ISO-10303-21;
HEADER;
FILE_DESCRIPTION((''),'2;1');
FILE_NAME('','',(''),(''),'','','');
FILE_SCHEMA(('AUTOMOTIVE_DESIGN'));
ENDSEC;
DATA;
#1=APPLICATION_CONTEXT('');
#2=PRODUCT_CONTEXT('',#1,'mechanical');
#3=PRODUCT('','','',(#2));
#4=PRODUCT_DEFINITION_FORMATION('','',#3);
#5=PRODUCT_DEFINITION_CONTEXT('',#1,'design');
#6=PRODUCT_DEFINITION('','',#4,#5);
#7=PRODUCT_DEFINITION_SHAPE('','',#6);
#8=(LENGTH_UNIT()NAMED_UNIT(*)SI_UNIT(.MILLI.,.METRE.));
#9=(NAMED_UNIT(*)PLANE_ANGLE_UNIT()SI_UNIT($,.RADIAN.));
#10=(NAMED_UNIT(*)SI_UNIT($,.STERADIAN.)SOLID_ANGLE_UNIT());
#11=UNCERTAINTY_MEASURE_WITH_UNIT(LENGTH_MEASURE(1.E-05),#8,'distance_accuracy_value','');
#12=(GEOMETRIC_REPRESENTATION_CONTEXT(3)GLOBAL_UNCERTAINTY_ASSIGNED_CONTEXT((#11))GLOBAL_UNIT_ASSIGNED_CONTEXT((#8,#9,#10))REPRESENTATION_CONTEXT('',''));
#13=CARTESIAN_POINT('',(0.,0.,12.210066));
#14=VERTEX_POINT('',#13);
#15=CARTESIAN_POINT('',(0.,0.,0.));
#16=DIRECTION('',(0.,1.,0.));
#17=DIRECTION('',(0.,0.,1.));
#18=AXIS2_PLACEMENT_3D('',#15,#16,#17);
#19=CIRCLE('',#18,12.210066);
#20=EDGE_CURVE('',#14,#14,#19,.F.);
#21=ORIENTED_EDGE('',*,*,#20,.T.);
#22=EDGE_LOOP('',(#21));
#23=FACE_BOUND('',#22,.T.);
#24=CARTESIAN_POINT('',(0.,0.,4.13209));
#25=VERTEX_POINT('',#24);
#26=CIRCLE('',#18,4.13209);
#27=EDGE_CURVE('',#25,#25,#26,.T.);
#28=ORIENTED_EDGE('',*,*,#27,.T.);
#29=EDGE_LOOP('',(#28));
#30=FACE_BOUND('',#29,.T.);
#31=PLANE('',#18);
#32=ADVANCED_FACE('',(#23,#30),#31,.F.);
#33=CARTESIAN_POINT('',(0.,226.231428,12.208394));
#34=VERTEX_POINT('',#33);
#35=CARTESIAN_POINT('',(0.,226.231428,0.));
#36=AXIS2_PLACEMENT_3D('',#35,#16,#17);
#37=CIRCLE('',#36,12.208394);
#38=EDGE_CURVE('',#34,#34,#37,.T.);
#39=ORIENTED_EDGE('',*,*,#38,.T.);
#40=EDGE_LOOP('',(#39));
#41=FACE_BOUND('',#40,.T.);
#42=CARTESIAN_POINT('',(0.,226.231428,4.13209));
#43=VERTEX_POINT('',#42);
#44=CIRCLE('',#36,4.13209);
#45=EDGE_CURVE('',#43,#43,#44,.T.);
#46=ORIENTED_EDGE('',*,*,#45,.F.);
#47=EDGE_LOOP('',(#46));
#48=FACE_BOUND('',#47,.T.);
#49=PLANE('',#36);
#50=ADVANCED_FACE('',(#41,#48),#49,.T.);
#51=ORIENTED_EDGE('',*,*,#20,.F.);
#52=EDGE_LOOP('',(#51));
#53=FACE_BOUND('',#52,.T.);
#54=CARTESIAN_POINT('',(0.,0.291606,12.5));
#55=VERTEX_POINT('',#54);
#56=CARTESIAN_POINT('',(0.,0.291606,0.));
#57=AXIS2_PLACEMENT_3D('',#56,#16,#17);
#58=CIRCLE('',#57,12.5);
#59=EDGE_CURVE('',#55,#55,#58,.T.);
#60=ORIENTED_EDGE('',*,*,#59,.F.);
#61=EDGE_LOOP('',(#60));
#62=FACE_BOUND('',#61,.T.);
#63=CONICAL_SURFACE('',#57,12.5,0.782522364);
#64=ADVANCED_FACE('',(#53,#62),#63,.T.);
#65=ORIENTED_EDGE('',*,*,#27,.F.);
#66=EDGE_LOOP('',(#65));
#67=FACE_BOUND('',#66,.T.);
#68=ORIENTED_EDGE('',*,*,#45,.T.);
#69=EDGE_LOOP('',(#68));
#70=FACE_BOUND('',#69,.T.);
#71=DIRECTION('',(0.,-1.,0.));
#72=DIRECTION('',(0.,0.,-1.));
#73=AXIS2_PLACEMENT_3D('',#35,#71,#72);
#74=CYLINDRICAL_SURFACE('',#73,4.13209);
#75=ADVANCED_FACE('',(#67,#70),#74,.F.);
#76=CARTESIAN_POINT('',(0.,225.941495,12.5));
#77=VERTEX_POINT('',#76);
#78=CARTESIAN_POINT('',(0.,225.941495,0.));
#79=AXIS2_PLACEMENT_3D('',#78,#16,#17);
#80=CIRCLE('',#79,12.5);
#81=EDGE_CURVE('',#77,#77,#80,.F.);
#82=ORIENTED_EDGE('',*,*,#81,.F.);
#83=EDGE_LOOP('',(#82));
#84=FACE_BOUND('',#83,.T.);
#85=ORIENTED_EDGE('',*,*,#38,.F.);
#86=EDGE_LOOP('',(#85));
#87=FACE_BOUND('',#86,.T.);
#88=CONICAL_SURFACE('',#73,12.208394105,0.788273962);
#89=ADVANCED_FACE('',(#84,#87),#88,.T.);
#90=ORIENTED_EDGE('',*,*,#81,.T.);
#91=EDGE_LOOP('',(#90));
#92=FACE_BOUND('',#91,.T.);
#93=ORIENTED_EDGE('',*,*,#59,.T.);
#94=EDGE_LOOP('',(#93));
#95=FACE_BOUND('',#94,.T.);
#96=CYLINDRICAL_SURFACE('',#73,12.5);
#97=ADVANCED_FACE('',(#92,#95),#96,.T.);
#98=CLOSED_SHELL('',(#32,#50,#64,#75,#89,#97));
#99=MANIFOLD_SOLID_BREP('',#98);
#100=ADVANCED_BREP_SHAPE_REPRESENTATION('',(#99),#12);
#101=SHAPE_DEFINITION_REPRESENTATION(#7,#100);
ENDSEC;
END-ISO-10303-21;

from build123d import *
from OCP.BRepFilletAPI import BRepFilletAPI_MakeChamfer

# Parameters (mm, degrees)
SKETCH1_R           = 12.5
BOSS_EXTRUDE1_DEPTH = 226.231428448
SKETCH2_R           = 4.132090217
CUT_EXTRUDE1_DEPTH  = 227.921041813
CHAMFER1_SIZE       = 0.2899335
CHAMFER1_SIZE2      = 0.291605895


with BuildPart() as part:
    # Sketch1 → Boss-Extrude1 (new body)
    with BuildSketch(Plane(origin=(0, 0, 0), x_dir=(1, 0, 0), z_dir=(0, 1, 0))):
        Circle(SKETCH1_R)
    extrude(amount=BOSS_EXTRUDE1_DEPTH)

    # Sketch2 → Cut-Extrude1 (cut, through all)
    with BuildSketch(Plane(origin=(0, 0, 0), x_dir=(1, 0, 0), z_dir=(0, 1, 0))):
        Circle(SKETCH2_R)
    extrude(amount=CUT_EXTRUDE1_DEPTH, mode=Mode.SUBTRACT)

    # Chamfer1: one chamfer whose edges measure the first distance from different faces: ONE call of the kernel's chamfer builder (chamfer() names one face for all edges)
    chamfer1_edges_1 = [part.edges().sort_by_distance(p)[0] for p in [
        (-12.5, 226.231428448, 0),
    ]]
    chamfer1_side_1 = [part.faces().sort_by_distance(p)[0] for p in [
        (-12.5, 113.115714224, 0),
    ]]
    chamfer1_edges_2 = [part.edges().sort_by_distance(p)[0] for p in [
        (-12.5, 0, 0),
    ]]
    chamfer1_side_2 = [part.faces().sort_by_distance(p)[0] for p in [
        (-12.146446609, 0, 0),
    ]]
    chamfer1 = BRepFilletAPI_MakeChamfer(part.part.solid().wrapped)
    for e in chamfer1_edges_1:
        chamfer1.Add(CHAMFER1_SIZE, CHAMFER1_SIZE2, e.wrapped, chamfer1_side_1[0].wrapped)  # the first distance lies on this face
    for e in chamfer1_edges_2:
        chamfer1.Add(CHAMFER1_SIZE, CHAMFER1_SIZE2, e.wrapped, chamfer1_side_2[0].wrapped)  # the first distance lies on this face
    add(Compound.cast(chamfer1.Shape()), mode=Mode.REPLACE)


solid = part.part
